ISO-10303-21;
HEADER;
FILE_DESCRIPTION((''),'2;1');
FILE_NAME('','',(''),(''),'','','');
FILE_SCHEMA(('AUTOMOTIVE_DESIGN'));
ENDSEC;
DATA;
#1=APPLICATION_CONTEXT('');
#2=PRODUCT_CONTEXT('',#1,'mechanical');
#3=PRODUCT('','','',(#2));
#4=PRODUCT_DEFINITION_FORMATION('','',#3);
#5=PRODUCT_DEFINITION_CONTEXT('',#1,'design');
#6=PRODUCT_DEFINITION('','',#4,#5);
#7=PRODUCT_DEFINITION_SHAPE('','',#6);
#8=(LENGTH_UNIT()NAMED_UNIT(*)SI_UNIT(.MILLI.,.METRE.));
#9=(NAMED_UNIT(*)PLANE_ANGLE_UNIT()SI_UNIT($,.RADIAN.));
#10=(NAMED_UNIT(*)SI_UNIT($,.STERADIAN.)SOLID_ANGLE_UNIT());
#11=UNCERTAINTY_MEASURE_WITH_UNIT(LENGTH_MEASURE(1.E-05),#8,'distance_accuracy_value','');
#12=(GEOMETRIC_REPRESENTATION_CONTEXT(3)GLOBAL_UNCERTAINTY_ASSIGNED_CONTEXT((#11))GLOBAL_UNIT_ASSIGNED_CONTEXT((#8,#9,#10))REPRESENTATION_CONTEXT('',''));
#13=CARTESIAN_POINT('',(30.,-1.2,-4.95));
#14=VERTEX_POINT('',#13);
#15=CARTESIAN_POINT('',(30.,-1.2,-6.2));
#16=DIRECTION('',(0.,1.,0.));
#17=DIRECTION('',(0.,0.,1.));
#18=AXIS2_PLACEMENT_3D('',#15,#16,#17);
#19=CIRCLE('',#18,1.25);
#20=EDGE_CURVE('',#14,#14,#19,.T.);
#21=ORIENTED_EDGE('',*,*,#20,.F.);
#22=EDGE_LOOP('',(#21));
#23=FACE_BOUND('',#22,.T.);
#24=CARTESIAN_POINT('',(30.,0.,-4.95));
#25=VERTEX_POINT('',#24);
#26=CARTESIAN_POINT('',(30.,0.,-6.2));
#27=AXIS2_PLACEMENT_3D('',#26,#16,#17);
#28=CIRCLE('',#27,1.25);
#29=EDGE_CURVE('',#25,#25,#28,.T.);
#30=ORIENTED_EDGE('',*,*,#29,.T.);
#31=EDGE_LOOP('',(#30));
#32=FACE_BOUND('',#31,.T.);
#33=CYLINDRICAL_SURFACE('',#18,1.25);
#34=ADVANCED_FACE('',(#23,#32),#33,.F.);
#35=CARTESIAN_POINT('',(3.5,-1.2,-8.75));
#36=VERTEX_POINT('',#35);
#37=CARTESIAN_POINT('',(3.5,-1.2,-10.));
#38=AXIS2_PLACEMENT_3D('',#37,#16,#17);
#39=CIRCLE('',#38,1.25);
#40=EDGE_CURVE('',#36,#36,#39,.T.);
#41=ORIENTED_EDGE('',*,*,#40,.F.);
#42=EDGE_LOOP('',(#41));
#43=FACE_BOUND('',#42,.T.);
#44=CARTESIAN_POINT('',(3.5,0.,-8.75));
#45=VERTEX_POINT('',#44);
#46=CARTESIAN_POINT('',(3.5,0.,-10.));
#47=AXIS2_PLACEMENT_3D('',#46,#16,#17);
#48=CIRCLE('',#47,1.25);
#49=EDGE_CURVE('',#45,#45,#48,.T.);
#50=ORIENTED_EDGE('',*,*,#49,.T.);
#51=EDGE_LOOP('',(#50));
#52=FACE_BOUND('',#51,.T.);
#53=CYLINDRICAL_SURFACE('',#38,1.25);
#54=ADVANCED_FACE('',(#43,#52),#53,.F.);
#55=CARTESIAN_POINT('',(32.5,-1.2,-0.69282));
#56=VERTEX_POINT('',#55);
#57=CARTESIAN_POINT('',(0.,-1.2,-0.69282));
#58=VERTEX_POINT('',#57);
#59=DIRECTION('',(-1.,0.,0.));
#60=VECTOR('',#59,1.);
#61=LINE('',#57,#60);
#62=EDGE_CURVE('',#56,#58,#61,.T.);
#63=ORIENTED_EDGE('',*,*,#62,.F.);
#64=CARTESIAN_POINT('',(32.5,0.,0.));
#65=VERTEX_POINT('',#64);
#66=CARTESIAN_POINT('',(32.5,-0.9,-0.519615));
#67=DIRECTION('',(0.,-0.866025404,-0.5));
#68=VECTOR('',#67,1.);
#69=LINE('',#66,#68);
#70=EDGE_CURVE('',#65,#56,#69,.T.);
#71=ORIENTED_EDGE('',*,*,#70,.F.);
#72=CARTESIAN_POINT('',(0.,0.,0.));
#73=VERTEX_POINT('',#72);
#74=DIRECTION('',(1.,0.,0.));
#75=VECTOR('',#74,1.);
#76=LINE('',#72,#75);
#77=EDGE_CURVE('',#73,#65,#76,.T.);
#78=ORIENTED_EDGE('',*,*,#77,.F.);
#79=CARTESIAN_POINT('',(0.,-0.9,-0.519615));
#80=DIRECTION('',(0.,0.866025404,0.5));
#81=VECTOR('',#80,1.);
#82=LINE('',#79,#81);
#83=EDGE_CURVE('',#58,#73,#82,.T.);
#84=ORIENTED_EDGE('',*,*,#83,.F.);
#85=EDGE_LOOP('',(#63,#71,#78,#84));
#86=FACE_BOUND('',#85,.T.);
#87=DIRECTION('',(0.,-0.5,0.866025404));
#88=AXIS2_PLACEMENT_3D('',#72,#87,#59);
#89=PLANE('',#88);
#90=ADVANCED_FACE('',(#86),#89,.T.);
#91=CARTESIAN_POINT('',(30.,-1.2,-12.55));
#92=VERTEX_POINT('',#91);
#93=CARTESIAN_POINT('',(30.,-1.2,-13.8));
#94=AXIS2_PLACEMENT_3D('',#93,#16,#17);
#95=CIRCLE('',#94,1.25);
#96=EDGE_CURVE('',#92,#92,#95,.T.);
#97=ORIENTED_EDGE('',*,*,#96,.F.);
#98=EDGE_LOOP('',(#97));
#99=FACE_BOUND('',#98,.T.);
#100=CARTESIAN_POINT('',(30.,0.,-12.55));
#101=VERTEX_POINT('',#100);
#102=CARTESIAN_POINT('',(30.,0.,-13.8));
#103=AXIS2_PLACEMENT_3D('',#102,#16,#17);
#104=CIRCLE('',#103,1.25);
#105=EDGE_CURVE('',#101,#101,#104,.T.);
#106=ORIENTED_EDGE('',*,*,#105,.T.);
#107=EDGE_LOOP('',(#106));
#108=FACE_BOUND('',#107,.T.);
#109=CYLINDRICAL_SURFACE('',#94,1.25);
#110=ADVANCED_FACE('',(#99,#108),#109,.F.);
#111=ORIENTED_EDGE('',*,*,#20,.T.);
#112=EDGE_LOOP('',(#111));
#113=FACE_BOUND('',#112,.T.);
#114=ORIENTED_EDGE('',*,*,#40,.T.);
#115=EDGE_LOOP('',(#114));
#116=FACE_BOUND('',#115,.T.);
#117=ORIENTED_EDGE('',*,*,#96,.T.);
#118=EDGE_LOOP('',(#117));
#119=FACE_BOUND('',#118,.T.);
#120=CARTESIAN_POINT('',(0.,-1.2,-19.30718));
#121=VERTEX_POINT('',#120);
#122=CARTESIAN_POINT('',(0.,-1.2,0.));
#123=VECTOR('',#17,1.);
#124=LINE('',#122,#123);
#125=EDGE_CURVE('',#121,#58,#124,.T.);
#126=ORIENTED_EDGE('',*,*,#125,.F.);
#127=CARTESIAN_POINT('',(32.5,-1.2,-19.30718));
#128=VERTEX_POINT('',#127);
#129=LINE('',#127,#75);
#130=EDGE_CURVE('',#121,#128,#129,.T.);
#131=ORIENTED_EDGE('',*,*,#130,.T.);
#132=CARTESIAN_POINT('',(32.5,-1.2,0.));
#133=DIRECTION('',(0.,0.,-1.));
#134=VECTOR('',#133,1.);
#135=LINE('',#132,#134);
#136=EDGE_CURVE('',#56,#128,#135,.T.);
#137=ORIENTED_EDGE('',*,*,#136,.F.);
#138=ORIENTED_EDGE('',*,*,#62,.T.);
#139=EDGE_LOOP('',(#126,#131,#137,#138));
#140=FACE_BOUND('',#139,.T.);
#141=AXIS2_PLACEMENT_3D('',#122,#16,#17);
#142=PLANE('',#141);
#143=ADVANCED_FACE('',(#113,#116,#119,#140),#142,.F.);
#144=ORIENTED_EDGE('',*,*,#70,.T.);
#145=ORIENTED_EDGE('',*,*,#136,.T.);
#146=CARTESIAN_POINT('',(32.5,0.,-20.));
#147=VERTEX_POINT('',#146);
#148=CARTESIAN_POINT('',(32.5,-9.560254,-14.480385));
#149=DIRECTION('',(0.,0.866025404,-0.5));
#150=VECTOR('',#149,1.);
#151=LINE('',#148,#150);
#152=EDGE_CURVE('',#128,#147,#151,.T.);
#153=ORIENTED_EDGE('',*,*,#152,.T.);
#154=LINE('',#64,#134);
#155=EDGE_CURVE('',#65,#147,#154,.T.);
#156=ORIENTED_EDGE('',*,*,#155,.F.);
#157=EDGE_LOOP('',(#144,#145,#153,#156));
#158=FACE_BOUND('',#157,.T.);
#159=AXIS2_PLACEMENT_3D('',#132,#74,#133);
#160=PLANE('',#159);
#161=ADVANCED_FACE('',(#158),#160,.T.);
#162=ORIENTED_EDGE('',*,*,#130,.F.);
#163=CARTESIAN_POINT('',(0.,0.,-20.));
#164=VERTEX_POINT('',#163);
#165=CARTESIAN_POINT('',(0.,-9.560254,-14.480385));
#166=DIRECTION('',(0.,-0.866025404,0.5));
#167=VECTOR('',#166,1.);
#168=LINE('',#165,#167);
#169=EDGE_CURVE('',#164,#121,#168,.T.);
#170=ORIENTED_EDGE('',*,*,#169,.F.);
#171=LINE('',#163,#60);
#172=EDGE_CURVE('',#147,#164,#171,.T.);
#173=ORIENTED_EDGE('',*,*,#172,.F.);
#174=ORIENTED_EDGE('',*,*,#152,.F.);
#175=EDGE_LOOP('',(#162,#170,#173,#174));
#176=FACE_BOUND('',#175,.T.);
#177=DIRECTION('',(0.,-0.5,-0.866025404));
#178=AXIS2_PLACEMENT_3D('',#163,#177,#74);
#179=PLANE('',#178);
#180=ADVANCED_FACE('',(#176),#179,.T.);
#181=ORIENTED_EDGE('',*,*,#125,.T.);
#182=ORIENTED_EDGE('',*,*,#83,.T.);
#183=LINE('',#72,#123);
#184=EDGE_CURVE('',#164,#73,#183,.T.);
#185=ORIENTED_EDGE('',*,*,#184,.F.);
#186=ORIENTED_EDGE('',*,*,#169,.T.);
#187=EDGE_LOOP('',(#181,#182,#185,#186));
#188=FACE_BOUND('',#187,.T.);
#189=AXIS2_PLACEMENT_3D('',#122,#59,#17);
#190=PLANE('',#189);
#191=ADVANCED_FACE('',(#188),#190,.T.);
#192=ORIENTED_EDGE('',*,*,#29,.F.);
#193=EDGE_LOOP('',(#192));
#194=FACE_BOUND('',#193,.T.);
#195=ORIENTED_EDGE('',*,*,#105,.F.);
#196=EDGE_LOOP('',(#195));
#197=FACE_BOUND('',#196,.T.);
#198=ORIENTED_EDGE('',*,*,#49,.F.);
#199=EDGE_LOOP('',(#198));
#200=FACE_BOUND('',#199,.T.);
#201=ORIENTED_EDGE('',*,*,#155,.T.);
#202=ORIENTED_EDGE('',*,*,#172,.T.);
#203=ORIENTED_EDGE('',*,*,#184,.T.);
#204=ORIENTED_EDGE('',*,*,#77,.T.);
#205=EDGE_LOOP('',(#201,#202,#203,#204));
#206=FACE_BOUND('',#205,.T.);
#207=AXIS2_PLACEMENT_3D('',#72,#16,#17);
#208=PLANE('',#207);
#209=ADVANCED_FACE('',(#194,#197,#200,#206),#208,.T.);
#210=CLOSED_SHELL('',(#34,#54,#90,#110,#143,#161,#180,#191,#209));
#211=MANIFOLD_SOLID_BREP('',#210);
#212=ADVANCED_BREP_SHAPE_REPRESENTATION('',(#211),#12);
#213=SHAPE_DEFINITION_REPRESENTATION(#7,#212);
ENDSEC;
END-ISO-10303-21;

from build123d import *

# Parameters (mm, degrees)
SKETCH1_W           = 32.5
SKETCH1_H           = 20
SKETCH1_R           = 1.25
BOSS_EXTRUDE1_DEPTH = 1.2
CHAMFER1_SIZE       = 1.2
CHAMFER1_SIZE_2     = 0.692820323
CHAMFER2_SIZE       = 1.2
CHAMFER2_SIZE_2     = 0.692820323


with BuildPart() as part:
    # Sketch1 → Boss-Extrude1 (new body)
    with BuildSketch(Plane(origin=(0, 0, 0), x_dir=(1, 0, 0), z_dir=(0, 1, 0))):
        with Locations((16.25, 10)):
            Rectangle(SKETCH1_W, SKETCH1_H)
        with Locations(Location((30, 6.2, 0), (0, 0, 270))):
            Circle(SKETCH1_R, mode=Mode.SUBTRACT)
        with Locations(Location((30, 13.8, 0), (0, 0, 270))):
            Circle(SKETCH1_R, mode=Mode.SUBTRACT)
        with Locations(Location((3.5, 10, 0), (0, 0, 270))):
            Circle(SKETCH1_R, mode=Mode.SUBTRACT)
    extrude(amount=-BOSS_EXTRUDE1_DEPTH)

    # Chamfer1
    # the kernel refuses this chamfer: 1.2, 0.692820323 mm, written as the material it takes off along each edge
    with BuildSketch(Plane(origin=(35.604502906, -1.2, -20), x_dir=(0, 0.9998132206222078, -0.019326765612701437), z_dir=(-1, 0, 0))) as chamfer1_piece_1:
        Polygon((CHAMFER1_SIZE * 0.999813220622, -CHAMFER1_SIZE * 0.0193267656127), (-CHAMFER1_SIZE_2 * 0.0193267656135, -CHAMFER1_SIZE_2 * 0.999813220662), (0, 0), align=None)
    extrude(amount=38.709005811, mode=Mode.SUBTRACT)

    # Chamfer2
    # the kernel refuses this chamfer: 1.2, 0.692820323 mm, written as the material it takes off along each edge
    with BuildSketch(Plane(origin=(-3.104502906, -1.2, 0), x_dir=(0, 0.999813220622208, 0.01932676561270074), z_dir=(1, 0, 0))) as chamfer2_piece_1:
        Polygon((CHAMFER2_SIZE * 0.999813220622, -CHAMFER2_SIZE * 0.0193267656127), (-CHAMFER2_SIZE_2 * 0.0193267656135, -CHAMFER2_SIZE_2 * 0.999813220662), (0, 0), align=None)
    extrude(amount=38.709005811, mode=Mode.SUBTRACT)


solid = part.part
